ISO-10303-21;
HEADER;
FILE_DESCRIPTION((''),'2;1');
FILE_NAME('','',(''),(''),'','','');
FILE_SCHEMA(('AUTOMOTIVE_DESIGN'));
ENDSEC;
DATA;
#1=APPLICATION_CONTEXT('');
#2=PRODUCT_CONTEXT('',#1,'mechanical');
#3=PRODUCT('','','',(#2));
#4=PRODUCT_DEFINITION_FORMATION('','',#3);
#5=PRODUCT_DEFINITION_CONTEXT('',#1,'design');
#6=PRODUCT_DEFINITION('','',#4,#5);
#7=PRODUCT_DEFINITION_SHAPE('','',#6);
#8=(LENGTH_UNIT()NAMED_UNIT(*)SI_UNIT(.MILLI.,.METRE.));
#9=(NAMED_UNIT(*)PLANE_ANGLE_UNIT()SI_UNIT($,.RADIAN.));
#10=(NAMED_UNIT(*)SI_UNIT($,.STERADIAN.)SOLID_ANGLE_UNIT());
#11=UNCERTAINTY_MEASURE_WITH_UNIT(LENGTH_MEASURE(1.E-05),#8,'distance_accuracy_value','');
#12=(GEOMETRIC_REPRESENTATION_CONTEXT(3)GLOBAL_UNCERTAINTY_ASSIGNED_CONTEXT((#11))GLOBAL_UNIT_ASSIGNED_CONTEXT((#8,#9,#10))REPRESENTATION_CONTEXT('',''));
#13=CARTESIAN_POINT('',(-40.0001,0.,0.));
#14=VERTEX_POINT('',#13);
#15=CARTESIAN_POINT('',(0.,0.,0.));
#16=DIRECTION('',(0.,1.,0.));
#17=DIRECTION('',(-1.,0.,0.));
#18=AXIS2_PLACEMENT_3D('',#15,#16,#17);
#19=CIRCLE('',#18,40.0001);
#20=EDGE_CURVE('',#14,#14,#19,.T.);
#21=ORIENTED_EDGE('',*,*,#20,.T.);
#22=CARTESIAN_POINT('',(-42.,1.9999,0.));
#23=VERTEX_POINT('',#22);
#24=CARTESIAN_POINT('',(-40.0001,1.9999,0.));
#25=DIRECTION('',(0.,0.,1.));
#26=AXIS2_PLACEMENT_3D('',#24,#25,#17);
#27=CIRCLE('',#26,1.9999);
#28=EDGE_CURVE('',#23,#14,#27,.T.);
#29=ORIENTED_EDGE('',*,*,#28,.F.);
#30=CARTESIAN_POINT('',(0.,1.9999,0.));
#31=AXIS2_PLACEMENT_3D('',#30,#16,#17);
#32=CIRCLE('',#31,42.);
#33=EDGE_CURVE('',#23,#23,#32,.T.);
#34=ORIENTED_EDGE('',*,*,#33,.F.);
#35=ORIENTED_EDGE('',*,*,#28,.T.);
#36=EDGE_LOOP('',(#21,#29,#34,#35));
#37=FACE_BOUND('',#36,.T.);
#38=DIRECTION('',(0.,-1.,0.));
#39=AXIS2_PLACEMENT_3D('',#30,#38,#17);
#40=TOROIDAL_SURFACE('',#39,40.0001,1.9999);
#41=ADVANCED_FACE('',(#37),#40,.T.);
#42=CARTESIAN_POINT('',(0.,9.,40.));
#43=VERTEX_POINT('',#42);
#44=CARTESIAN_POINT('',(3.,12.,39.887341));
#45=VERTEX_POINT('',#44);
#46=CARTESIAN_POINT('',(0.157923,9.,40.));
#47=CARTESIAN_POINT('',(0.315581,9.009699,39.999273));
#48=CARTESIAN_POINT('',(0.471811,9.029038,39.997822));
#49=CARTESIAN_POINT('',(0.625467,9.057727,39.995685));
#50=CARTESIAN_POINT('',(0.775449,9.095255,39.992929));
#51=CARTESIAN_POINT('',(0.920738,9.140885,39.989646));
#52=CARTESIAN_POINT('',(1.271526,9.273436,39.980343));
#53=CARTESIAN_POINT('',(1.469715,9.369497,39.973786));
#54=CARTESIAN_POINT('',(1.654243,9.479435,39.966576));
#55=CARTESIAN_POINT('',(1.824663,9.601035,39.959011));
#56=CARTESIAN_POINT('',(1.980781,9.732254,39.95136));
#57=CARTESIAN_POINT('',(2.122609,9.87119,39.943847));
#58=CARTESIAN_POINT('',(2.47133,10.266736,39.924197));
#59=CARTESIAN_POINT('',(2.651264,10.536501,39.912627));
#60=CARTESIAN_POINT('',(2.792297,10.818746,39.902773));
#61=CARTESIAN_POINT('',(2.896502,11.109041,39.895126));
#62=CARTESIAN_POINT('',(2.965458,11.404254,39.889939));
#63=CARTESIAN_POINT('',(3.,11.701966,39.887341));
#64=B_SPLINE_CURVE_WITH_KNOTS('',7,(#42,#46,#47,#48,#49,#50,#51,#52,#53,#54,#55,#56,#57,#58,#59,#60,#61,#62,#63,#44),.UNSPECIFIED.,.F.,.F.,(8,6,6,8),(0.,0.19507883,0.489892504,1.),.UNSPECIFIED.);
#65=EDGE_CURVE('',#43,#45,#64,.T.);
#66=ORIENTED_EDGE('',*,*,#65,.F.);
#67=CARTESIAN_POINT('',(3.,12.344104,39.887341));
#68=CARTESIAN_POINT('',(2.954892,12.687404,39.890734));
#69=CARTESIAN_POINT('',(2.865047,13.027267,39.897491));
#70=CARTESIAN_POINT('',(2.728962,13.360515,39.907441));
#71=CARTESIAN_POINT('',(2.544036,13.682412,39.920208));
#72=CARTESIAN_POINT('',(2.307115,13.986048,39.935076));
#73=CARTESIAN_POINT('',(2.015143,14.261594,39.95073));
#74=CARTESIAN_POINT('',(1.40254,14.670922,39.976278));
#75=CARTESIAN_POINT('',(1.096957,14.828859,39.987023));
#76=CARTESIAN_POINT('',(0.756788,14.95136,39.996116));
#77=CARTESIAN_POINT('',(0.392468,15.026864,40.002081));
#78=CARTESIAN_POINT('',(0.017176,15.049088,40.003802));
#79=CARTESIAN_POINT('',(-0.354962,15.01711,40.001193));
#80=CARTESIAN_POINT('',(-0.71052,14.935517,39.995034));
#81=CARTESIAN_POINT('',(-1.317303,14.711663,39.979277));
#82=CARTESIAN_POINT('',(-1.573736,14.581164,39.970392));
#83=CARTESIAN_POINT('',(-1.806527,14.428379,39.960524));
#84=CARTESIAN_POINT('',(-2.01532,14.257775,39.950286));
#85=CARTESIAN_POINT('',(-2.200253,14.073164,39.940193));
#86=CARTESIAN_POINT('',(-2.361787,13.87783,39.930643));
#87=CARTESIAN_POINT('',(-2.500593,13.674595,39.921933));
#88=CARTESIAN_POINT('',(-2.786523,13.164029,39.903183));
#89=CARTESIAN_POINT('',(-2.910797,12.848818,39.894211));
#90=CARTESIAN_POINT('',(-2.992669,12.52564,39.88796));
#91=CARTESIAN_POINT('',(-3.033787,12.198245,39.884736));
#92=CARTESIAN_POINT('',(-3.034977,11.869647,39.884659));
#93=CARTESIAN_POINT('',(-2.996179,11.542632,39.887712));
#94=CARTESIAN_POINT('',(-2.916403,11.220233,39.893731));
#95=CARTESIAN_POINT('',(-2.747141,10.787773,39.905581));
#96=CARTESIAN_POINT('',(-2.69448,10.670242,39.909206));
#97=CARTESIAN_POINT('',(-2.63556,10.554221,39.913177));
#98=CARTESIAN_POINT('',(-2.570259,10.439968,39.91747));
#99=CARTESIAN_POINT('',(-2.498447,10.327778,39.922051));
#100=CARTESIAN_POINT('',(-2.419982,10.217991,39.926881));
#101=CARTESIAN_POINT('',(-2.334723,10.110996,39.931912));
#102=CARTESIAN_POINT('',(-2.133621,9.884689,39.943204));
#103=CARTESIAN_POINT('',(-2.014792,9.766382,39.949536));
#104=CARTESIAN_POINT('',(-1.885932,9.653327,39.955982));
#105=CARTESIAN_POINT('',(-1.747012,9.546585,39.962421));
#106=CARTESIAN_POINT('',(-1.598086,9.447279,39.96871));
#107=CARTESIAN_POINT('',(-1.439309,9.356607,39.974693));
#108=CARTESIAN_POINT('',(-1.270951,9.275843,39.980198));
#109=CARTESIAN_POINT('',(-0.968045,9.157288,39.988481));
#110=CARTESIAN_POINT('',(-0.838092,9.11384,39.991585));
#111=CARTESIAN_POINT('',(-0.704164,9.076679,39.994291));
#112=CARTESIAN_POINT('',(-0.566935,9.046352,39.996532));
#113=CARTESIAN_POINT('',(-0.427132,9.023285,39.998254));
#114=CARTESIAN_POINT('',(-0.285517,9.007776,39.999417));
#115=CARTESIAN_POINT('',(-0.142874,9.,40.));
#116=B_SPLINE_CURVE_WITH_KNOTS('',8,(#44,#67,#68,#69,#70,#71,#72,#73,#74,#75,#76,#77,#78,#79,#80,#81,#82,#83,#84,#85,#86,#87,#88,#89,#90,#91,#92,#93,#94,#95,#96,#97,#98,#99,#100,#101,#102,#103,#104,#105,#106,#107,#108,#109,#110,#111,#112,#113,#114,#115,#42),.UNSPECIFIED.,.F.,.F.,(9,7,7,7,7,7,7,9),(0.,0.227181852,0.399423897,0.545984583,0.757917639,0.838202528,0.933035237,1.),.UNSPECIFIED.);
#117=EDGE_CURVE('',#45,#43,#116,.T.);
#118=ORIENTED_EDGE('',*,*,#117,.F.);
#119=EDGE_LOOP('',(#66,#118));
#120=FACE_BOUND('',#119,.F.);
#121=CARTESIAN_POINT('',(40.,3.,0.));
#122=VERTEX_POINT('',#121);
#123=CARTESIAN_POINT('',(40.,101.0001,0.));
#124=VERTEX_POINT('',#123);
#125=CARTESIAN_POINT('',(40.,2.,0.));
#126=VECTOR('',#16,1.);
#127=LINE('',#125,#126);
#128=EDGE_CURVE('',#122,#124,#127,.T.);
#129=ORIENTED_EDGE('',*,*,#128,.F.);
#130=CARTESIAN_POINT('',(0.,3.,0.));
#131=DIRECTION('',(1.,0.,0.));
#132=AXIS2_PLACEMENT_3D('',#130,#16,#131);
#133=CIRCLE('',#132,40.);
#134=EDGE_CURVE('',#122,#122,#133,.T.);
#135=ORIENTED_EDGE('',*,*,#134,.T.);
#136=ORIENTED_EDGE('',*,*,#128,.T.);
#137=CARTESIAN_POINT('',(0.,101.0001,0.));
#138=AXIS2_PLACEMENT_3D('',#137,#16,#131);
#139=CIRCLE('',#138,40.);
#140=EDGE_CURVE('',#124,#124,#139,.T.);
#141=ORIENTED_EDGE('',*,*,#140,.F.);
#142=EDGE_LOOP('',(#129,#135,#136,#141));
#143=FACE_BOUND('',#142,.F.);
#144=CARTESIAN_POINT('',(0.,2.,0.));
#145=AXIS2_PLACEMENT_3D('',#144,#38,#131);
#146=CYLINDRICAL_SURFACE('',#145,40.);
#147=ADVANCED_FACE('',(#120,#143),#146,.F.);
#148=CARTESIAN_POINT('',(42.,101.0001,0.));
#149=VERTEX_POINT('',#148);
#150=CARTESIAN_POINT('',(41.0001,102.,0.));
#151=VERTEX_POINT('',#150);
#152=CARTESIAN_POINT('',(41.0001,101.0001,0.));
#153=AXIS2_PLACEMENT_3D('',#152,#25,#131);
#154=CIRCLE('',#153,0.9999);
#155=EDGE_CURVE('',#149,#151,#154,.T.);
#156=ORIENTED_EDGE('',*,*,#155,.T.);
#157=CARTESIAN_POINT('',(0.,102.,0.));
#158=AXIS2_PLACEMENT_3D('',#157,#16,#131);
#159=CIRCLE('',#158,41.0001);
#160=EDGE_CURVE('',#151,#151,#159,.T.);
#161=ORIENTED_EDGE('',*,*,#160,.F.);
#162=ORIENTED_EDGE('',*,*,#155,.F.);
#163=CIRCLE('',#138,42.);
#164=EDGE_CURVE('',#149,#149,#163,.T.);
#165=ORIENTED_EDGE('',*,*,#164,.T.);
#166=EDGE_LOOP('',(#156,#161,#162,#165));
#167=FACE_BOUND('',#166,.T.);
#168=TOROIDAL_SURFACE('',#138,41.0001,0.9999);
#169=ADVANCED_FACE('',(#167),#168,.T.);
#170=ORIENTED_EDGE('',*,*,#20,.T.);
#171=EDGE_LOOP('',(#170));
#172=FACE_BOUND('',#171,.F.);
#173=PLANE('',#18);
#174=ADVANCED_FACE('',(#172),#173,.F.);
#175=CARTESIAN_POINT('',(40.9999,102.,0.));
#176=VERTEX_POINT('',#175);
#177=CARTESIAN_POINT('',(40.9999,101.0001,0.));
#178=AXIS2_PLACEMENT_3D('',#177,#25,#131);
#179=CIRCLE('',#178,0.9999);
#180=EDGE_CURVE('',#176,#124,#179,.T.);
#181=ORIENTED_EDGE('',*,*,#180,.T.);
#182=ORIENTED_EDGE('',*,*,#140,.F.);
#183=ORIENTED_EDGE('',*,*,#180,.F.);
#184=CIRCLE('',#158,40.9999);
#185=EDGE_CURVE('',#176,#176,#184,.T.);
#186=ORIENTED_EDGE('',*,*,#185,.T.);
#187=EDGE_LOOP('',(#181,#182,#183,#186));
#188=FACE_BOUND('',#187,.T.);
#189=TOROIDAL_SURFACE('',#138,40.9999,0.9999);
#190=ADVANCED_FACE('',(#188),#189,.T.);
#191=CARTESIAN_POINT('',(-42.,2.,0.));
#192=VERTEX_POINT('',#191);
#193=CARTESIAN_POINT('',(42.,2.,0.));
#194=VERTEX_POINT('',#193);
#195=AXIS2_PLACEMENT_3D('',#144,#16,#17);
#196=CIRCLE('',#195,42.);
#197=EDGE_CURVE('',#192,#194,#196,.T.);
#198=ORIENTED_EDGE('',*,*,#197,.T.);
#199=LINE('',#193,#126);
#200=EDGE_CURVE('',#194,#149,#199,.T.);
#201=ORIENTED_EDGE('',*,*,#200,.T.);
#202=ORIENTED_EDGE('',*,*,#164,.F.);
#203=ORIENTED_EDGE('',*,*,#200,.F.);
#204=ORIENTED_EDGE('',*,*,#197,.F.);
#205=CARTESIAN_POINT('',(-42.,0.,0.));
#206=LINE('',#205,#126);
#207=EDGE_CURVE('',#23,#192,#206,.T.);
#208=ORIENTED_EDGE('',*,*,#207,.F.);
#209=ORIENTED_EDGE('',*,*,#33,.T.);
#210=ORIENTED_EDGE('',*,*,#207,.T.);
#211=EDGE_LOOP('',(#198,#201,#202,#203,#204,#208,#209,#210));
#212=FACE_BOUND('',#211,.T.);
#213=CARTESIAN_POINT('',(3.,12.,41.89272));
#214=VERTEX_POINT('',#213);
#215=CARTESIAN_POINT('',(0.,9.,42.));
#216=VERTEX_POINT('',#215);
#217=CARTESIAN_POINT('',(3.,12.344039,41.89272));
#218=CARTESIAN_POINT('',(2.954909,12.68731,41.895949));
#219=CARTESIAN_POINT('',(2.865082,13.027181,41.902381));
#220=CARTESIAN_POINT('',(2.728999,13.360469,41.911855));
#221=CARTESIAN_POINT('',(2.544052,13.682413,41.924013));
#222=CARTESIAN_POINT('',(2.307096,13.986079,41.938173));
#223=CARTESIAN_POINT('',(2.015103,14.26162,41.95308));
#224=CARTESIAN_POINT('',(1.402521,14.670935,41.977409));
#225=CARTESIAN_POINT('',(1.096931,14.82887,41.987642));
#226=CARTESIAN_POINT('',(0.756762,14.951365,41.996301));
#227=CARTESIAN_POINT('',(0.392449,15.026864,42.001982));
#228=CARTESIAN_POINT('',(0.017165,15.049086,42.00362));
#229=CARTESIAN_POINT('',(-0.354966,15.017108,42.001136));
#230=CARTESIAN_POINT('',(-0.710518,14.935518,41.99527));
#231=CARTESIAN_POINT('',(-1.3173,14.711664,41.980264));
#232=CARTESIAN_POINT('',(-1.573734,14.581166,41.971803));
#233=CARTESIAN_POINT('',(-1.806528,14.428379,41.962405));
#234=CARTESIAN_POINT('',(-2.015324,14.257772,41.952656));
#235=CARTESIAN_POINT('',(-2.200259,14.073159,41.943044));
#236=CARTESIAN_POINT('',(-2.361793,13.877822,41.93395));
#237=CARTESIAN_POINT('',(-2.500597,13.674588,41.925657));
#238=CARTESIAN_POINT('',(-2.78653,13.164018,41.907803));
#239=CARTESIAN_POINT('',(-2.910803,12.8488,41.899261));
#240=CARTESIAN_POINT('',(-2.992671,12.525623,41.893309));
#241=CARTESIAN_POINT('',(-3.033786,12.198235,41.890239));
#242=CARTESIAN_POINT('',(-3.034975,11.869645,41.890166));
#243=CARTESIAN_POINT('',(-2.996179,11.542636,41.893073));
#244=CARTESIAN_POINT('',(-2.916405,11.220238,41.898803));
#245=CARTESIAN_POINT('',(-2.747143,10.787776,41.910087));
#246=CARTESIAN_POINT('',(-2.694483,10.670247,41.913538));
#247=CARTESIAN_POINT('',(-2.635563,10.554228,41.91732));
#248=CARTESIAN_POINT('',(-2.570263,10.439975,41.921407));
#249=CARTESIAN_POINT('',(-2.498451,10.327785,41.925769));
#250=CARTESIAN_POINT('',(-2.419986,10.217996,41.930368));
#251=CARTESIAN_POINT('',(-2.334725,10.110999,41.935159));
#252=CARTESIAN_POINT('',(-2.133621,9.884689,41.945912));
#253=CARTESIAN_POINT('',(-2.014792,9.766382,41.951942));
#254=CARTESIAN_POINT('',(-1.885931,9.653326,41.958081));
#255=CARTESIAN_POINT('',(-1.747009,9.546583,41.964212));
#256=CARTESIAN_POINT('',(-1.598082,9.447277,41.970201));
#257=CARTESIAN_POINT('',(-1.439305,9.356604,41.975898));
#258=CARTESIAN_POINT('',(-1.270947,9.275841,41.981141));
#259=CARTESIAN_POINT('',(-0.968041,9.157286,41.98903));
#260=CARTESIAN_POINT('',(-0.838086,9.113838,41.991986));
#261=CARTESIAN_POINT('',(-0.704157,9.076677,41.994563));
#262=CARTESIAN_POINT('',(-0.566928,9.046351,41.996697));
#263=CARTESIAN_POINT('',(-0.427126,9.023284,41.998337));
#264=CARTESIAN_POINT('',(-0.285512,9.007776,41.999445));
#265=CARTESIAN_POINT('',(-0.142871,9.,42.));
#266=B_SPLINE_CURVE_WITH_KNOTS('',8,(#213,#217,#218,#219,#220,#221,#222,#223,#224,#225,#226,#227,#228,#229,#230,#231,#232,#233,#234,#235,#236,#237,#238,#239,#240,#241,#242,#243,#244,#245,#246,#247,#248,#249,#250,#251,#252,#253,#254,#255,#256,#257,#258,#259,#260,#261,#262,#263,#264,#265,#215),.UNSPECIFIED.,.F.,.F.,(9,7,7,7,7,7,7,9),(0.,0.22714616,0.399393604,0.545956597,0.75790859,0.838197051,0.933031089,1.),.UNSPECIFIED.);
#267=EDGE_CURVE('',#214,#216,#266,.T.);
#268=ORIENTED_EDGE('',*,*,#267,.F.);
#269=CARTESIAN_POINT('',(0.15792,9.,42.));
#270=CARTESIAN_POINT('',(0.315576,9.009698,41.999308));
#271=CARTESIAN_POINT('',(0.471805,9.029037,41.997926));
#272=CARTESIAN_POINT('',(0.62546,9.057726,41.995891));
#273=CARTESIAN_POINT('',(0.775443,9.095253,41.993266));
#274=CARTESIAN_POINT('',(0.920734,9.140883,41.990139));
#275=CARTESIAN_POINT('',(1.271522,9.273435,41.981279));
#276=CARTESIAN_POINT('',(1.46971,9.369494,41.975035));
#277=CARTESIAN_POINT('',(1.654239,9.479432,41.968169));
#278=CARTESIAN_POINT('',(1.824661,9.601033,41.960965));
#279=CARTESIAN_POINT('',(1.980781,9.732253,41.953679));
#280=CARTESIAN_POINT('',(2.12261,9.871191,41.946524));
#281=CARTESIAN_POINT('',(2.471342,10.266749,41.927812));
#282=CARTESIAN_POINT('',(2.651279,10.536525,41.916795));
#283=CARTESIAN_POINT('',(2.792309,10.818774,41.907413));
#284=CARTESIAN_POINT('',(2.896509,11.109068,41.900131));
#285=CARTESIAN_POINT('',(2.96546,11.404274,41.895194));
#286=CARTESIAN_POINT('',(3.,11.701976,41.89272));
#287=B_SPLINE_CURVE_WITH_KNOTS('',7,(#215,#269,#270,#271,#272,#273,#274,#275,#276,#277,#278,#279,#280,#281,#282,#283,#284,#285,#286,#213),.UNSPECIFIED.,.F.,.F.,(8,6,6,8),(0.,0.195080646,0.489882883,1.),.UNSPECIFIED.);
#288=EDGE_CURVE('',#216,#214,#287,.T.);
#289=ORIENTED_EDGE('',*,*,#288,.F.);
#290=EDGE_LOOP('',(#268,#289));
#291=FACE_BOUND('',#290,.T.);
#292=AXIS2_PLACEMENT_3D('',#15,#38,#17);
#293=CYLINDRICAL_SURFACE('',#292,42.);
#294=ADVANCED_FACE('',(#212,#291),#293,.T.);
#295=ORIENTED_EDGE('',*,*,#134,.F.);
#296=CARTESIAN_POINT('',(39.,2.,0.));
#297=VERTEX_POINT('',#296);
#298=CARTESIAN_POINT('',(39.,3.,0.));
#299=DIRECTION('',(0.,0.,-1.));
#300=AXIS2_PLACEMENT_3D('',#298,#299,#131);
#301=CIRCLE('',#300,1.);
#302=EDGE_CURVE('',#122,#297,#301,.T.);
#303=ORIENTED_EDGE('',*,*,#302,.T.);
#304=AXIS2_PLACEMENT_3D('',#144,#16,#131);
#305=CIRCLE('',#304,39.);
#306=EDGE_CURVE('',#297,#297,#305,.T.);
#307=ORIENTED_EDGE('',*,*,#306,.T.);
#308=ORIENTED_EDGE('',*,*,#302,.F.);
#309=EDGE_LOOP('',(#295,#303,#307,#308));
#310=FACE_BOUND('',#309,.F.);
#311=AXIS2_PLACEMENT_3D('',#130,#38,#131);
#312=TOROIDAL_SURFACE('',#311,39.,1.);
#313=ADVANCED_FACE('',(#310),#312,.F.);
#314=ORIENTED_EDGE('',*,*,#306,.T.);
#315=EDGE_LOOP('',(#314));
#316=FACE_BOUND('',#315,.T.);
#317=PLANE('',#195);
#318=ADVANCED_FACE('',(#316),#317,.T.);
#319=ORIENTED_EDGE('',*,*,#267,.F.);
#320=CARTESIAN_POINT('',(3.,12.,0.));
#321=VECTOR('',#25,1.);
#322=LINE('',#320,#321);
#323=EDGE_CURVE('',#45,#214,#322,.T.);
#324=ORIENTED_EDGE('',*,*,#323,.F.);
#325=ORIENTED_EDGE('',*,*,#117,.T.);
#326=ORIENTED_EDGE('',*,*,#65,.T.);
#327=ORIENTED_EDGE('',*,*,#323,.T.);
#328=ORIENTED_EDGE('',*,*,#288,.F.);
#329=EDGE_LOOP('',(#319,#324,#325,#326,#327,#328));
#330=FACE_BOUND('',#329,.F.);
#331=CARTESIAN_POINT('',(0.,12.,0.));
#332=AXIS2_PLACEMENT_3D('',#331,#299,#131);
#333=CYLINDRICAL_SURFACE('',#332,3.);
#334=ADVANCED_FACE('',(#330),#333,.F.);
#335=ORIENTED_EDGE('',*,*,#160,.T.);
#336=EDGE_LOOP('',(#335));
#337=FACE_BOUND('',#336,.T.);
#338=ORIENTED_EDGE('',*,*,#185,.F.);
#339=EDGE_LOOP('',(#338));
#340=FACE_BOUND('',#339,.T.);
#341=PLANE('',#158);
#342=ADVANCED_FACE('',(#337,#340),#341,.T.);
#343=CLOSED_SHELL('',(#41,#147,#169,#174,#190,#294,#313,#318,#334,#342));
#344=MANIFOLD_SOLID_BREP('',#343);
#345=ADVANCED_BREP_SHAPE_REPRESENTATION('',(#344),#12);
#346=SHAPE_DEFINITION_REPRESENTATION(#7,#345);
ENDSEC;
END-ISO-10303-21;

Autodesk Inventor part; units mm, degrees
ref_plane "YZ Plane" through (0, 0, 0) normal (1, 0, 0) x (0, 1, 0)
ref_plane "XZ Plane" through (0, 0, 0) normal (0, 1, 0) x (-1, 0, 0)
ref_plane "XY Plane" through (0, 0, 0) normal (0, 0, 1) x (1, 0, 0)
sketch "Sketch1" plane through (0, 0, 0) normal (0, 1, 0) x (-1, 0, 0)
  circle A0 centre (0, 0) radius 42
  dimension "d0" = 84
extrude "Extrusion1" add sketch "Sketch1" along normal blind 2
sketch "Sketch2" plane through (0, 2, 0) normal (0, 1, 0) x (1, 0, 0)
  circle A0 centre (0, 0) radius 42
  circle A1 centre (0, 0) radius 40
  dimension "d3" = 80
  dimension "d6" = 84
extrude "Extrusion2" add sketch "Sketch2" along normal blind 100
fillet "Fillet1" radius 2 1 edges at (42, 0, 0)
fillet "Fillet2" radius 1 2 edges at (-42, 102, 0) (-40, 102, 0)
fillet "Fillet3" radius 1 1 edges at (-40, 2, 0)
sketch "Sketch3" plane through (0, 0, 0) normal (0, 0, 1) x (1, 0, 0)
  line L0 (-42, 2) -> (42, 2) projected
  line L1 (0, 2) -> (0, 12)
  circle A0 centre (0, 12) radius 3
  point P0 (0, 0)
  dimension "d10" = 10
  dimension "d11" = 6
extrude "Extrusion3" cut sketch "Sketch3" along normal through all
ref_plane "Work Plane1" through (0, 0, 42) normal (0, 0, 1) x (1, 0, 0)
properties part number "Reservoir"
